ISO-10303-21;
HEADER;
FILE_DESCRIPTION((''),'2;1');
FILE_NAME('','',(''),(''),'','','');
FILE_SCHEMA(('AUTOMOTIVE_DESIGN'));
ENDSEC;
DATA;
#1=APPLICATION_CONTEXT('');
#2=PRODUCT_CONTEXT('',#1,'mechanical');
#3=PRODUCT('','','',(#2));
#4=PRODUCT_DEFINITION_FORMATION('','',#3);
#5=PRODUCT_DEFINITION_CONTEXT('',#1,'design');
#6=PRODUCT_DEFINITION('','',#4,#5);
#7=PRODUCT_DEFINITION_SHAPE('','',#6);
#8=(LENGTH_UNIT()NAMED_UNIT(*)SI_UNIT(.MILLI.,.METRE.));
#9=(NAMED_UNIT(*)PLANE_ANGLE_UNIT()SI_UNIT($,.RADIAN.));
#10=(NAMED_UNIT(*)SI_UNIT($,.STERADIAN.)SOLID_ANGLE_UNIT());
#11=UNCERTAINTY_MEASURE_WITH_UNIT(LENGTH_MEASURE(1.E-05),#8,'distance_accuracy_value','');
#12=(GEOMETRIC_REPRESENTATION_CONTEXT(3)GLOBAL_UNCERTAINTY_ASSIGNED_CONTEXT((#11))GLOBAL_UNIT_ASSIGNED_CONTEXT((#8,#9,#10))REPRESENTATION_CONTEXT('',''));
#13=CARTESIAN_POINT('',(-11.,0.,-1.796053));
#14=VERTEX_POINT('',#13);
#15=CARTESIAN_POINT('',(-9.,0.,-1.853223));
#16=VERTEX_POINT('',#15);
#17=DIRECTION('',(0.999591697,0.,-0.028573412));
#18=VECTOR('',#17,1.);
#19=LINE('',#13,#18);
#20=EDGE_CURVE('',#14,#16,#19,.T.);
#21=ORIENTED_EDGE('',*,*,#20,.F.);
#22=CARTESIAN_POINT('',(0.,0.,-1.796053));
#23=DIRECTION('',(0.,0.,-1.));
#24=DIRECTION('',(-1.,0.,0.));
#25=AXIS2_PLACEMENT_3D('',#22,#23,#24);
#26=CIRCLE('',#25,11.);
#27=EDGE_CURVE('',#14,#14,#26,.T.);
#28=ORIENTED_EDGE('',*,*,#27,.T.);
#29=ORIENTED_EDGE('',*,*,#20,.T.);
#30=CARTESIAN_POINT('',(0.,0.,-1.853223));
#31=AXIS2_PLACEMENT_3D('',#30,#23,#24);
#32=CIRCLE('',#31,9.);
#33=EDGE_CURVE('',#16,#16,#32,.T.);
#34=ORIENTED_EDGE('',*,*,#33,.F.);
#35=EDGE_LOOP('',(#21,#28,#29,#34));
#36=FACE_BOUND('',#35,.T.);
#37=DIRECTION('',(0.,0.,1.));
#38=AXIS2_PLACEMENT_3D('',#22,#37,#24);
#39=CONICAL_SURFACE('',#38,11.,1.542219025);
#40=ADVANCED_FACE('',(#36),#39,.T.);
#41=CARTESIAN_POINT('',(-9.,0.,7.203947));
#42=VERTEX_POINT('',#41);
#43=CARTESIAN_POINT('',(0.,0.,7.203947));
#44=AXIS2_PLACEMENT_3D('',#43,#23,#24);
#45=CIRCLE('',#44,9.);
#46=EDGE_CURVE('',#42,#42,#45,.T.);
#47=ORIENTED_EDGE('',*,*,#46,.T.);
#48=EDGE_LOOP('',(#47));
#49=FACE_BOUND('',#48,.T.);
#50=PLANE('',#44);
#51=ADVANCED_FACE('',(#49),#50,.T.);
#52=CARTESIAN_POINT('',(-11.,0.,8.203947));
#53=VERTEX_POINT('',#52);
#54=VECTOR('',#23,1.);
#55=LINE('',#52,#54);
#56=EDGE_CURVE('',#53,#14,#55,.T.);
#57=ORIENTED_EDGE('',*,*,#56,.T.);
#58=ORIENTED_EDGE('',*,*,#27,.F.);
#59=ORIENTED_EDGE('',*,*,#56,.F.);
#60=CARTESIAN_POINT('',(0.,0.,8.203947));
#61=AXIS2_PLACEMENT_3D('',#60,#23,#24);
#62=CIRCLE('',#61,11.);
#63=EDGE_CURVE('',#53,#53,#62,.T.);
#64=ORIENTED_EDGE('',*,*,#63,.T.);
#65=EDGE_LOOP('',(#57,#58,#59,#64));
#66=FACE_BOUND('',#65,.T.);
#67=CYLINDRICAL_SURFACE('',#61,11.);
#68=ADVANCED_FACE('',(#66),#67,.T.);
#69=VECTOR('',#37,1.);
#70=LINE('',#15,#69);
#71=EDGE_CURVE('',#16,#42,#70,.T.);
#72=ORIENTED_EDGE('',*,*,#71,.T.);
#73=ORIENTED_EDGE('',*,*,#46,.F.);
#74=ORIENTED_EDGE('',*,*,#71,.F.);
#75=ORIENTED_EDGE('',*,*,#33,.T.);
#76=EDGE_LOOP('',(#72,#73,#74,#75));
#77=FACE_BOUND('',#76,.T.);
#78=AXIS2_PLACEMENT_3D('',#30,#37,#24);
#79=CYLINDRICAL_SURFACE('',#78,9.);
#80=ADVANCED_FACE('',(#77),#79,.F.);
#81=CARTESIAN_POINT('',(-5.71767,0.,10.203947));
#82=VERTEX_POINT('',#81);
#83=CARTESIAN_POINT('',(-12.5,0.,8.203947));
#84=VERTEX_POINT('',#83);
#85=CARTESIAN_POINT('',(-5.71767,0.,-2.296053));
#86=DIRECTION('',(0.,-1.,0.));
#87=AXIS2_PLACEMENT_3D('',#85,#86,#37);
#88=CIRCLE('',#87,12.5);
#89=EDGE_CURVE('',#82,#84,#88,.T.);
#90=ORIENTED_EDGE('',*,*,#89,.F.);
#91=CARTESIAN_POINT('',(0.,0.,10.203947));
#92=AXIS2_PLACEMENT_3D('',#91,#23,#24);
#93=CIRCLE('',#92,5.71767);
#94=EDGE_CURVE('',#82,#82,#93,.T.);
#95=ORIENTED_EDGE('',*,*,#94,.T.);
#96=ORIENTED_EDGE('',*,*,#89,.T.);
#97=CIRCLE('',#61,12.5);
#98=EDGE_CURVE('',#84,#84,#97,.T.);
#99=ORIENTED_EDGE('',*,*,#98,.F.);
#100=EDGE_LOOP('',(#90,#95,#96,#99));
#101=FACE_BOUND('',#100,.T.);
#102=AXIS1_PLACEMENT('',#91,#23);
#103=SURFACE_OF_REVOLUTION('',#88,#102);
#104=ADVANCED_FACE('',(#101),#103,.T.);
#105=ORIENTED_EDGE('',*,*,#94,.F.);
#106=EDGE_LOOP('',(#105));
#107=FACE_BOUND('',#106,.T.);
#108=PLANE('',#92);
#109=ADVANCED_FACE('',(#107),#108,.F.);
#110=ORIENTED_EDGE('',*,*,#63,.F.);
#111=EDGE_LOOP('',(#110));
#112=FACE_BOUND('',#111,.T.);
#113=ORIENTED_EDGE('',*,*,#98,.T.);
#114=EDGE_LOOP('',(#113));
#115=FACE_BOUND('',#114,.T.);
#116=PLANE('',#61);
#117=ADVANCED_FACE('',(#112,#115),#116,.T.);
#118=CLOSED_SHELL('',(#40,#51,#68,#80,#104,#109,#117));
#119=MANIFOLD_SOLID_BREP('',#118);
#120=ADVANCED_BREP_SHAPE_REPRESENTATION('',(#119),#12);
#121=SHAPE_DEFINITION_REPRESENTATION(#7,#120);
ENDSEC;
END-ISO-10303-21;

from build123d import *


# Not quite as in the source:
# - a fillet or chamfer that OpenCascade refuses, or shapes differently, is made with other operations: its cross-section is extruded or revolved along the edge and cut away or added


with BuildPart() as f1:
    # F0 (on Front) → F1 (revolve)
    with BuildSketch(Plane.XZ):
        Polygon((0, 7.2039468596), (0, 10.2039468596), (-12.5, 10.2039468596), (-12.5, 8.2039468596), (-11, 8.2039468596), (-11, -1.7960531404), (-9, -1.853223308), (-9, 7.2039468596), align=None)
    revolve(axis=Axis((0, 0, 8.7039468596), (0, 0, -1)))

    # F2: fillet of radius 12.5 on 1 edges, made by hand

    # F2_s1 → F2_t2 (revolve, cut)
    with BuildSketch(Plane.XZ):
        with BuildLine():
            ThreePointArc((-5.7176700169, 10.2039468596), (-9.2532039228, 9.6935256679), (-12.5, 8.2039468596))
            Line((-12.5, 8.2039468596), (-12.6356465997, 8.4139468596))
            ThreePointArc((-12.6356465997, 8.4139468596), (-12.75, 9.2039468596), (-12.75, 10.2039468596))
            Line((-12.75, 10.2039468596), (-12.5, 10.4539468596))
            Line((-12.5, 10.4539468596), (-5.7176700169, 10.4539468596))
            Line((-5.7176700169, 10.4539468596), (-5.7176700169, 10.2039468596))
        make_face()
    revolve(axis=Axis((0, 0, 10.2039468596), (0, 0, -1)), mode=Mode.SUBTRACT)


solid = f1.part
